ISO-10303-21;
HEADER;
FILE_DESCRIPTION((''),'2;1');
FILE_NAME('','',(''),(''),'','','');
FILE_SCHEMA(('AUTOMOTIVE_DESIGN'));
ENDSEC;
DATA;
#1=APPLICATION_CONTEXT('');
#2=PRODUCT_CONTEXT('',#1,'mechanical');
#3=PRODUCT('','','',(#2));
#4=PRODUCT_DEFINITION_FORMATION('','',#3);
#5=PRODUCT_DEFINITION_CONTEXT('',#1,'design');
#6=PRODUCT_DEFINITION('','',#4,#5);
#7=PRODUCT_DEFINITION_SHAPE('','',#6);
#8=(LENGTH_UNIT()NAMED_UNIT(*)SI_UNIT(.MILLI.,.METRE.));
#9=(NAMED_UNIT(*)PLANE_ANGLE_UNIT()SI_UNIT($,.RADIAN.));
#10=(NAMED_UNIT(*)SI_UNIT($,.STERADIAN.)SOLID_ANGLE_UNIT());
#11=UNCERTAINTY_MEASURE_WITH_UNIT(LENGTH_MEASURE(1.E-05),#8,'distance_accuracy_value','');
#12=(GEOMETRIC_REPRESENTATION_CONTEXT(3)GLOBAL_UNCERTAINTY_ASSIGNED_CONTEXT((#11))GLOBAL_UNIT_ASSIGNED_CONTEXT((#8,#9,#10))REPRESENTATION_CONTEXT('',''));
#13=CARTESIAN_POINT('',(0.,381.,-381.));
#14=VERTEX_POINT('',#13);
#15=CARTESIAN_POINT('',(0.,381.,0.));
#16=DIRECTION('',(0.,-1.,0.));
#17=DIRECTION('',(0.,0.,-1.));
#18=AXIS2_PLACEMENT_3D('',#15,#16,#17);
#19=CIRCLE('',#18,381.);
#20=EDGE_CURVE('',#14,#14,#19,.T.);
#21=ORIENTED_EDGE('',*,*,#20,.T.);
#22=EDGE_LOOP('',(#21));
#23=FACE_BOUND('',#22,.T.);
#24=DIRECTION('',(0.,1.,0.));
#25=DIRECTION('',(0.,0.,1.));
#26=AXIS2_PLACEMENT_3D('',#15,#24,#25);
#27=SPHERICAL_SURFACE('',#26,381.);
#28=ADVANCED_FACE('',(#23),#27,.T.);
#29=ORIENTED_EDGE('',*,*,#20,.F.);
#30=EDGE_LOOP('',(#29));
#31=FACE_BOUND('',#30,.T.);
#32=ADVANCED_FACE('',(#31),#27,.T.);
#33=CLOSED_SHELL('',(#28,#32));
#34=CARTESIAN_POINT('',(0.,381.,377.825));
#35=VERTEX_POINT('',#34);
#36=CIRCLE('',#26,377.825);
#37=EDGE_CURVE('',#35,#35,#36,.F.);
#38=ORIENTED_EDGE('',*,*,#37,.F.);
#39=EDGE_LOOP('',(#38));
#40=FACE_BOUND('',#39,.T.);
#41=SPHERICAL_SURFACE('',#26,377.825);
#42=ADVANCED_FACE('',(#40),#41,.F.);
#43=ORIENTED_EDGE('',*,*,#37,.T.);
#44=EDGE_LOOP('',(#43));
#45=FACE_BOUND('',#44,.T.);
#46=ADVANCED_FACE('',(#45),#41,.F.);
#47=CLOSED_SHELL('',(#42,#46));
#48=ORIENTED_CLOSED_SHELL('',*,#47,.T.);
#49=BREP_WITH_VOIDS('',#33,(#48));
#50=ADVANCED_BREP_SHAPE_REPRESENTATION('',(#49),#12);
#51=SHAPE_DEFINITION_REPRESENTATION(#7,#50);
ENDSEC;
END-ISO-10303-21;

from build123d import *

# Parameters (mm, degrees)
SKETCH1_R           = 381
BOSS_EXTRUDE1_DEPTH = 762
FILLET1_R           = 381
SHELL2_T            = 3.175


with BuildPart() as part:
    # Sketch1 → Boss-Extrude1 (new body)
    with BuildSketch(Plane(origin=(0, 0, 0), x_dir=(1, 0, 0), z_dir=(0, 1, 0))):
        with Locations(Location((0, 0, 0), (0, 0, 270))):
            Circle(SKETCH1_R)
    extrude(amount=BOSS_EXTRUDE1_DEPTH)

    # Fillet1
    fillet1_edges = [part.edges().sort_by_distance(p)[0] for p in [
        (0, 0, -381),
        (0, 762, -381),
    ]]
    fillet(fillet1_edges, radius=FILLET1_R - 0.0001)  # a hair under: the kernel refuses the full size

    # Shell2 (no face opened: a closed hollow body)
    add(offset(amount=-SHELL2_T, mode=Mode.PRIVATE), mode=Mode.SUBTRACT)


solid = part.part
